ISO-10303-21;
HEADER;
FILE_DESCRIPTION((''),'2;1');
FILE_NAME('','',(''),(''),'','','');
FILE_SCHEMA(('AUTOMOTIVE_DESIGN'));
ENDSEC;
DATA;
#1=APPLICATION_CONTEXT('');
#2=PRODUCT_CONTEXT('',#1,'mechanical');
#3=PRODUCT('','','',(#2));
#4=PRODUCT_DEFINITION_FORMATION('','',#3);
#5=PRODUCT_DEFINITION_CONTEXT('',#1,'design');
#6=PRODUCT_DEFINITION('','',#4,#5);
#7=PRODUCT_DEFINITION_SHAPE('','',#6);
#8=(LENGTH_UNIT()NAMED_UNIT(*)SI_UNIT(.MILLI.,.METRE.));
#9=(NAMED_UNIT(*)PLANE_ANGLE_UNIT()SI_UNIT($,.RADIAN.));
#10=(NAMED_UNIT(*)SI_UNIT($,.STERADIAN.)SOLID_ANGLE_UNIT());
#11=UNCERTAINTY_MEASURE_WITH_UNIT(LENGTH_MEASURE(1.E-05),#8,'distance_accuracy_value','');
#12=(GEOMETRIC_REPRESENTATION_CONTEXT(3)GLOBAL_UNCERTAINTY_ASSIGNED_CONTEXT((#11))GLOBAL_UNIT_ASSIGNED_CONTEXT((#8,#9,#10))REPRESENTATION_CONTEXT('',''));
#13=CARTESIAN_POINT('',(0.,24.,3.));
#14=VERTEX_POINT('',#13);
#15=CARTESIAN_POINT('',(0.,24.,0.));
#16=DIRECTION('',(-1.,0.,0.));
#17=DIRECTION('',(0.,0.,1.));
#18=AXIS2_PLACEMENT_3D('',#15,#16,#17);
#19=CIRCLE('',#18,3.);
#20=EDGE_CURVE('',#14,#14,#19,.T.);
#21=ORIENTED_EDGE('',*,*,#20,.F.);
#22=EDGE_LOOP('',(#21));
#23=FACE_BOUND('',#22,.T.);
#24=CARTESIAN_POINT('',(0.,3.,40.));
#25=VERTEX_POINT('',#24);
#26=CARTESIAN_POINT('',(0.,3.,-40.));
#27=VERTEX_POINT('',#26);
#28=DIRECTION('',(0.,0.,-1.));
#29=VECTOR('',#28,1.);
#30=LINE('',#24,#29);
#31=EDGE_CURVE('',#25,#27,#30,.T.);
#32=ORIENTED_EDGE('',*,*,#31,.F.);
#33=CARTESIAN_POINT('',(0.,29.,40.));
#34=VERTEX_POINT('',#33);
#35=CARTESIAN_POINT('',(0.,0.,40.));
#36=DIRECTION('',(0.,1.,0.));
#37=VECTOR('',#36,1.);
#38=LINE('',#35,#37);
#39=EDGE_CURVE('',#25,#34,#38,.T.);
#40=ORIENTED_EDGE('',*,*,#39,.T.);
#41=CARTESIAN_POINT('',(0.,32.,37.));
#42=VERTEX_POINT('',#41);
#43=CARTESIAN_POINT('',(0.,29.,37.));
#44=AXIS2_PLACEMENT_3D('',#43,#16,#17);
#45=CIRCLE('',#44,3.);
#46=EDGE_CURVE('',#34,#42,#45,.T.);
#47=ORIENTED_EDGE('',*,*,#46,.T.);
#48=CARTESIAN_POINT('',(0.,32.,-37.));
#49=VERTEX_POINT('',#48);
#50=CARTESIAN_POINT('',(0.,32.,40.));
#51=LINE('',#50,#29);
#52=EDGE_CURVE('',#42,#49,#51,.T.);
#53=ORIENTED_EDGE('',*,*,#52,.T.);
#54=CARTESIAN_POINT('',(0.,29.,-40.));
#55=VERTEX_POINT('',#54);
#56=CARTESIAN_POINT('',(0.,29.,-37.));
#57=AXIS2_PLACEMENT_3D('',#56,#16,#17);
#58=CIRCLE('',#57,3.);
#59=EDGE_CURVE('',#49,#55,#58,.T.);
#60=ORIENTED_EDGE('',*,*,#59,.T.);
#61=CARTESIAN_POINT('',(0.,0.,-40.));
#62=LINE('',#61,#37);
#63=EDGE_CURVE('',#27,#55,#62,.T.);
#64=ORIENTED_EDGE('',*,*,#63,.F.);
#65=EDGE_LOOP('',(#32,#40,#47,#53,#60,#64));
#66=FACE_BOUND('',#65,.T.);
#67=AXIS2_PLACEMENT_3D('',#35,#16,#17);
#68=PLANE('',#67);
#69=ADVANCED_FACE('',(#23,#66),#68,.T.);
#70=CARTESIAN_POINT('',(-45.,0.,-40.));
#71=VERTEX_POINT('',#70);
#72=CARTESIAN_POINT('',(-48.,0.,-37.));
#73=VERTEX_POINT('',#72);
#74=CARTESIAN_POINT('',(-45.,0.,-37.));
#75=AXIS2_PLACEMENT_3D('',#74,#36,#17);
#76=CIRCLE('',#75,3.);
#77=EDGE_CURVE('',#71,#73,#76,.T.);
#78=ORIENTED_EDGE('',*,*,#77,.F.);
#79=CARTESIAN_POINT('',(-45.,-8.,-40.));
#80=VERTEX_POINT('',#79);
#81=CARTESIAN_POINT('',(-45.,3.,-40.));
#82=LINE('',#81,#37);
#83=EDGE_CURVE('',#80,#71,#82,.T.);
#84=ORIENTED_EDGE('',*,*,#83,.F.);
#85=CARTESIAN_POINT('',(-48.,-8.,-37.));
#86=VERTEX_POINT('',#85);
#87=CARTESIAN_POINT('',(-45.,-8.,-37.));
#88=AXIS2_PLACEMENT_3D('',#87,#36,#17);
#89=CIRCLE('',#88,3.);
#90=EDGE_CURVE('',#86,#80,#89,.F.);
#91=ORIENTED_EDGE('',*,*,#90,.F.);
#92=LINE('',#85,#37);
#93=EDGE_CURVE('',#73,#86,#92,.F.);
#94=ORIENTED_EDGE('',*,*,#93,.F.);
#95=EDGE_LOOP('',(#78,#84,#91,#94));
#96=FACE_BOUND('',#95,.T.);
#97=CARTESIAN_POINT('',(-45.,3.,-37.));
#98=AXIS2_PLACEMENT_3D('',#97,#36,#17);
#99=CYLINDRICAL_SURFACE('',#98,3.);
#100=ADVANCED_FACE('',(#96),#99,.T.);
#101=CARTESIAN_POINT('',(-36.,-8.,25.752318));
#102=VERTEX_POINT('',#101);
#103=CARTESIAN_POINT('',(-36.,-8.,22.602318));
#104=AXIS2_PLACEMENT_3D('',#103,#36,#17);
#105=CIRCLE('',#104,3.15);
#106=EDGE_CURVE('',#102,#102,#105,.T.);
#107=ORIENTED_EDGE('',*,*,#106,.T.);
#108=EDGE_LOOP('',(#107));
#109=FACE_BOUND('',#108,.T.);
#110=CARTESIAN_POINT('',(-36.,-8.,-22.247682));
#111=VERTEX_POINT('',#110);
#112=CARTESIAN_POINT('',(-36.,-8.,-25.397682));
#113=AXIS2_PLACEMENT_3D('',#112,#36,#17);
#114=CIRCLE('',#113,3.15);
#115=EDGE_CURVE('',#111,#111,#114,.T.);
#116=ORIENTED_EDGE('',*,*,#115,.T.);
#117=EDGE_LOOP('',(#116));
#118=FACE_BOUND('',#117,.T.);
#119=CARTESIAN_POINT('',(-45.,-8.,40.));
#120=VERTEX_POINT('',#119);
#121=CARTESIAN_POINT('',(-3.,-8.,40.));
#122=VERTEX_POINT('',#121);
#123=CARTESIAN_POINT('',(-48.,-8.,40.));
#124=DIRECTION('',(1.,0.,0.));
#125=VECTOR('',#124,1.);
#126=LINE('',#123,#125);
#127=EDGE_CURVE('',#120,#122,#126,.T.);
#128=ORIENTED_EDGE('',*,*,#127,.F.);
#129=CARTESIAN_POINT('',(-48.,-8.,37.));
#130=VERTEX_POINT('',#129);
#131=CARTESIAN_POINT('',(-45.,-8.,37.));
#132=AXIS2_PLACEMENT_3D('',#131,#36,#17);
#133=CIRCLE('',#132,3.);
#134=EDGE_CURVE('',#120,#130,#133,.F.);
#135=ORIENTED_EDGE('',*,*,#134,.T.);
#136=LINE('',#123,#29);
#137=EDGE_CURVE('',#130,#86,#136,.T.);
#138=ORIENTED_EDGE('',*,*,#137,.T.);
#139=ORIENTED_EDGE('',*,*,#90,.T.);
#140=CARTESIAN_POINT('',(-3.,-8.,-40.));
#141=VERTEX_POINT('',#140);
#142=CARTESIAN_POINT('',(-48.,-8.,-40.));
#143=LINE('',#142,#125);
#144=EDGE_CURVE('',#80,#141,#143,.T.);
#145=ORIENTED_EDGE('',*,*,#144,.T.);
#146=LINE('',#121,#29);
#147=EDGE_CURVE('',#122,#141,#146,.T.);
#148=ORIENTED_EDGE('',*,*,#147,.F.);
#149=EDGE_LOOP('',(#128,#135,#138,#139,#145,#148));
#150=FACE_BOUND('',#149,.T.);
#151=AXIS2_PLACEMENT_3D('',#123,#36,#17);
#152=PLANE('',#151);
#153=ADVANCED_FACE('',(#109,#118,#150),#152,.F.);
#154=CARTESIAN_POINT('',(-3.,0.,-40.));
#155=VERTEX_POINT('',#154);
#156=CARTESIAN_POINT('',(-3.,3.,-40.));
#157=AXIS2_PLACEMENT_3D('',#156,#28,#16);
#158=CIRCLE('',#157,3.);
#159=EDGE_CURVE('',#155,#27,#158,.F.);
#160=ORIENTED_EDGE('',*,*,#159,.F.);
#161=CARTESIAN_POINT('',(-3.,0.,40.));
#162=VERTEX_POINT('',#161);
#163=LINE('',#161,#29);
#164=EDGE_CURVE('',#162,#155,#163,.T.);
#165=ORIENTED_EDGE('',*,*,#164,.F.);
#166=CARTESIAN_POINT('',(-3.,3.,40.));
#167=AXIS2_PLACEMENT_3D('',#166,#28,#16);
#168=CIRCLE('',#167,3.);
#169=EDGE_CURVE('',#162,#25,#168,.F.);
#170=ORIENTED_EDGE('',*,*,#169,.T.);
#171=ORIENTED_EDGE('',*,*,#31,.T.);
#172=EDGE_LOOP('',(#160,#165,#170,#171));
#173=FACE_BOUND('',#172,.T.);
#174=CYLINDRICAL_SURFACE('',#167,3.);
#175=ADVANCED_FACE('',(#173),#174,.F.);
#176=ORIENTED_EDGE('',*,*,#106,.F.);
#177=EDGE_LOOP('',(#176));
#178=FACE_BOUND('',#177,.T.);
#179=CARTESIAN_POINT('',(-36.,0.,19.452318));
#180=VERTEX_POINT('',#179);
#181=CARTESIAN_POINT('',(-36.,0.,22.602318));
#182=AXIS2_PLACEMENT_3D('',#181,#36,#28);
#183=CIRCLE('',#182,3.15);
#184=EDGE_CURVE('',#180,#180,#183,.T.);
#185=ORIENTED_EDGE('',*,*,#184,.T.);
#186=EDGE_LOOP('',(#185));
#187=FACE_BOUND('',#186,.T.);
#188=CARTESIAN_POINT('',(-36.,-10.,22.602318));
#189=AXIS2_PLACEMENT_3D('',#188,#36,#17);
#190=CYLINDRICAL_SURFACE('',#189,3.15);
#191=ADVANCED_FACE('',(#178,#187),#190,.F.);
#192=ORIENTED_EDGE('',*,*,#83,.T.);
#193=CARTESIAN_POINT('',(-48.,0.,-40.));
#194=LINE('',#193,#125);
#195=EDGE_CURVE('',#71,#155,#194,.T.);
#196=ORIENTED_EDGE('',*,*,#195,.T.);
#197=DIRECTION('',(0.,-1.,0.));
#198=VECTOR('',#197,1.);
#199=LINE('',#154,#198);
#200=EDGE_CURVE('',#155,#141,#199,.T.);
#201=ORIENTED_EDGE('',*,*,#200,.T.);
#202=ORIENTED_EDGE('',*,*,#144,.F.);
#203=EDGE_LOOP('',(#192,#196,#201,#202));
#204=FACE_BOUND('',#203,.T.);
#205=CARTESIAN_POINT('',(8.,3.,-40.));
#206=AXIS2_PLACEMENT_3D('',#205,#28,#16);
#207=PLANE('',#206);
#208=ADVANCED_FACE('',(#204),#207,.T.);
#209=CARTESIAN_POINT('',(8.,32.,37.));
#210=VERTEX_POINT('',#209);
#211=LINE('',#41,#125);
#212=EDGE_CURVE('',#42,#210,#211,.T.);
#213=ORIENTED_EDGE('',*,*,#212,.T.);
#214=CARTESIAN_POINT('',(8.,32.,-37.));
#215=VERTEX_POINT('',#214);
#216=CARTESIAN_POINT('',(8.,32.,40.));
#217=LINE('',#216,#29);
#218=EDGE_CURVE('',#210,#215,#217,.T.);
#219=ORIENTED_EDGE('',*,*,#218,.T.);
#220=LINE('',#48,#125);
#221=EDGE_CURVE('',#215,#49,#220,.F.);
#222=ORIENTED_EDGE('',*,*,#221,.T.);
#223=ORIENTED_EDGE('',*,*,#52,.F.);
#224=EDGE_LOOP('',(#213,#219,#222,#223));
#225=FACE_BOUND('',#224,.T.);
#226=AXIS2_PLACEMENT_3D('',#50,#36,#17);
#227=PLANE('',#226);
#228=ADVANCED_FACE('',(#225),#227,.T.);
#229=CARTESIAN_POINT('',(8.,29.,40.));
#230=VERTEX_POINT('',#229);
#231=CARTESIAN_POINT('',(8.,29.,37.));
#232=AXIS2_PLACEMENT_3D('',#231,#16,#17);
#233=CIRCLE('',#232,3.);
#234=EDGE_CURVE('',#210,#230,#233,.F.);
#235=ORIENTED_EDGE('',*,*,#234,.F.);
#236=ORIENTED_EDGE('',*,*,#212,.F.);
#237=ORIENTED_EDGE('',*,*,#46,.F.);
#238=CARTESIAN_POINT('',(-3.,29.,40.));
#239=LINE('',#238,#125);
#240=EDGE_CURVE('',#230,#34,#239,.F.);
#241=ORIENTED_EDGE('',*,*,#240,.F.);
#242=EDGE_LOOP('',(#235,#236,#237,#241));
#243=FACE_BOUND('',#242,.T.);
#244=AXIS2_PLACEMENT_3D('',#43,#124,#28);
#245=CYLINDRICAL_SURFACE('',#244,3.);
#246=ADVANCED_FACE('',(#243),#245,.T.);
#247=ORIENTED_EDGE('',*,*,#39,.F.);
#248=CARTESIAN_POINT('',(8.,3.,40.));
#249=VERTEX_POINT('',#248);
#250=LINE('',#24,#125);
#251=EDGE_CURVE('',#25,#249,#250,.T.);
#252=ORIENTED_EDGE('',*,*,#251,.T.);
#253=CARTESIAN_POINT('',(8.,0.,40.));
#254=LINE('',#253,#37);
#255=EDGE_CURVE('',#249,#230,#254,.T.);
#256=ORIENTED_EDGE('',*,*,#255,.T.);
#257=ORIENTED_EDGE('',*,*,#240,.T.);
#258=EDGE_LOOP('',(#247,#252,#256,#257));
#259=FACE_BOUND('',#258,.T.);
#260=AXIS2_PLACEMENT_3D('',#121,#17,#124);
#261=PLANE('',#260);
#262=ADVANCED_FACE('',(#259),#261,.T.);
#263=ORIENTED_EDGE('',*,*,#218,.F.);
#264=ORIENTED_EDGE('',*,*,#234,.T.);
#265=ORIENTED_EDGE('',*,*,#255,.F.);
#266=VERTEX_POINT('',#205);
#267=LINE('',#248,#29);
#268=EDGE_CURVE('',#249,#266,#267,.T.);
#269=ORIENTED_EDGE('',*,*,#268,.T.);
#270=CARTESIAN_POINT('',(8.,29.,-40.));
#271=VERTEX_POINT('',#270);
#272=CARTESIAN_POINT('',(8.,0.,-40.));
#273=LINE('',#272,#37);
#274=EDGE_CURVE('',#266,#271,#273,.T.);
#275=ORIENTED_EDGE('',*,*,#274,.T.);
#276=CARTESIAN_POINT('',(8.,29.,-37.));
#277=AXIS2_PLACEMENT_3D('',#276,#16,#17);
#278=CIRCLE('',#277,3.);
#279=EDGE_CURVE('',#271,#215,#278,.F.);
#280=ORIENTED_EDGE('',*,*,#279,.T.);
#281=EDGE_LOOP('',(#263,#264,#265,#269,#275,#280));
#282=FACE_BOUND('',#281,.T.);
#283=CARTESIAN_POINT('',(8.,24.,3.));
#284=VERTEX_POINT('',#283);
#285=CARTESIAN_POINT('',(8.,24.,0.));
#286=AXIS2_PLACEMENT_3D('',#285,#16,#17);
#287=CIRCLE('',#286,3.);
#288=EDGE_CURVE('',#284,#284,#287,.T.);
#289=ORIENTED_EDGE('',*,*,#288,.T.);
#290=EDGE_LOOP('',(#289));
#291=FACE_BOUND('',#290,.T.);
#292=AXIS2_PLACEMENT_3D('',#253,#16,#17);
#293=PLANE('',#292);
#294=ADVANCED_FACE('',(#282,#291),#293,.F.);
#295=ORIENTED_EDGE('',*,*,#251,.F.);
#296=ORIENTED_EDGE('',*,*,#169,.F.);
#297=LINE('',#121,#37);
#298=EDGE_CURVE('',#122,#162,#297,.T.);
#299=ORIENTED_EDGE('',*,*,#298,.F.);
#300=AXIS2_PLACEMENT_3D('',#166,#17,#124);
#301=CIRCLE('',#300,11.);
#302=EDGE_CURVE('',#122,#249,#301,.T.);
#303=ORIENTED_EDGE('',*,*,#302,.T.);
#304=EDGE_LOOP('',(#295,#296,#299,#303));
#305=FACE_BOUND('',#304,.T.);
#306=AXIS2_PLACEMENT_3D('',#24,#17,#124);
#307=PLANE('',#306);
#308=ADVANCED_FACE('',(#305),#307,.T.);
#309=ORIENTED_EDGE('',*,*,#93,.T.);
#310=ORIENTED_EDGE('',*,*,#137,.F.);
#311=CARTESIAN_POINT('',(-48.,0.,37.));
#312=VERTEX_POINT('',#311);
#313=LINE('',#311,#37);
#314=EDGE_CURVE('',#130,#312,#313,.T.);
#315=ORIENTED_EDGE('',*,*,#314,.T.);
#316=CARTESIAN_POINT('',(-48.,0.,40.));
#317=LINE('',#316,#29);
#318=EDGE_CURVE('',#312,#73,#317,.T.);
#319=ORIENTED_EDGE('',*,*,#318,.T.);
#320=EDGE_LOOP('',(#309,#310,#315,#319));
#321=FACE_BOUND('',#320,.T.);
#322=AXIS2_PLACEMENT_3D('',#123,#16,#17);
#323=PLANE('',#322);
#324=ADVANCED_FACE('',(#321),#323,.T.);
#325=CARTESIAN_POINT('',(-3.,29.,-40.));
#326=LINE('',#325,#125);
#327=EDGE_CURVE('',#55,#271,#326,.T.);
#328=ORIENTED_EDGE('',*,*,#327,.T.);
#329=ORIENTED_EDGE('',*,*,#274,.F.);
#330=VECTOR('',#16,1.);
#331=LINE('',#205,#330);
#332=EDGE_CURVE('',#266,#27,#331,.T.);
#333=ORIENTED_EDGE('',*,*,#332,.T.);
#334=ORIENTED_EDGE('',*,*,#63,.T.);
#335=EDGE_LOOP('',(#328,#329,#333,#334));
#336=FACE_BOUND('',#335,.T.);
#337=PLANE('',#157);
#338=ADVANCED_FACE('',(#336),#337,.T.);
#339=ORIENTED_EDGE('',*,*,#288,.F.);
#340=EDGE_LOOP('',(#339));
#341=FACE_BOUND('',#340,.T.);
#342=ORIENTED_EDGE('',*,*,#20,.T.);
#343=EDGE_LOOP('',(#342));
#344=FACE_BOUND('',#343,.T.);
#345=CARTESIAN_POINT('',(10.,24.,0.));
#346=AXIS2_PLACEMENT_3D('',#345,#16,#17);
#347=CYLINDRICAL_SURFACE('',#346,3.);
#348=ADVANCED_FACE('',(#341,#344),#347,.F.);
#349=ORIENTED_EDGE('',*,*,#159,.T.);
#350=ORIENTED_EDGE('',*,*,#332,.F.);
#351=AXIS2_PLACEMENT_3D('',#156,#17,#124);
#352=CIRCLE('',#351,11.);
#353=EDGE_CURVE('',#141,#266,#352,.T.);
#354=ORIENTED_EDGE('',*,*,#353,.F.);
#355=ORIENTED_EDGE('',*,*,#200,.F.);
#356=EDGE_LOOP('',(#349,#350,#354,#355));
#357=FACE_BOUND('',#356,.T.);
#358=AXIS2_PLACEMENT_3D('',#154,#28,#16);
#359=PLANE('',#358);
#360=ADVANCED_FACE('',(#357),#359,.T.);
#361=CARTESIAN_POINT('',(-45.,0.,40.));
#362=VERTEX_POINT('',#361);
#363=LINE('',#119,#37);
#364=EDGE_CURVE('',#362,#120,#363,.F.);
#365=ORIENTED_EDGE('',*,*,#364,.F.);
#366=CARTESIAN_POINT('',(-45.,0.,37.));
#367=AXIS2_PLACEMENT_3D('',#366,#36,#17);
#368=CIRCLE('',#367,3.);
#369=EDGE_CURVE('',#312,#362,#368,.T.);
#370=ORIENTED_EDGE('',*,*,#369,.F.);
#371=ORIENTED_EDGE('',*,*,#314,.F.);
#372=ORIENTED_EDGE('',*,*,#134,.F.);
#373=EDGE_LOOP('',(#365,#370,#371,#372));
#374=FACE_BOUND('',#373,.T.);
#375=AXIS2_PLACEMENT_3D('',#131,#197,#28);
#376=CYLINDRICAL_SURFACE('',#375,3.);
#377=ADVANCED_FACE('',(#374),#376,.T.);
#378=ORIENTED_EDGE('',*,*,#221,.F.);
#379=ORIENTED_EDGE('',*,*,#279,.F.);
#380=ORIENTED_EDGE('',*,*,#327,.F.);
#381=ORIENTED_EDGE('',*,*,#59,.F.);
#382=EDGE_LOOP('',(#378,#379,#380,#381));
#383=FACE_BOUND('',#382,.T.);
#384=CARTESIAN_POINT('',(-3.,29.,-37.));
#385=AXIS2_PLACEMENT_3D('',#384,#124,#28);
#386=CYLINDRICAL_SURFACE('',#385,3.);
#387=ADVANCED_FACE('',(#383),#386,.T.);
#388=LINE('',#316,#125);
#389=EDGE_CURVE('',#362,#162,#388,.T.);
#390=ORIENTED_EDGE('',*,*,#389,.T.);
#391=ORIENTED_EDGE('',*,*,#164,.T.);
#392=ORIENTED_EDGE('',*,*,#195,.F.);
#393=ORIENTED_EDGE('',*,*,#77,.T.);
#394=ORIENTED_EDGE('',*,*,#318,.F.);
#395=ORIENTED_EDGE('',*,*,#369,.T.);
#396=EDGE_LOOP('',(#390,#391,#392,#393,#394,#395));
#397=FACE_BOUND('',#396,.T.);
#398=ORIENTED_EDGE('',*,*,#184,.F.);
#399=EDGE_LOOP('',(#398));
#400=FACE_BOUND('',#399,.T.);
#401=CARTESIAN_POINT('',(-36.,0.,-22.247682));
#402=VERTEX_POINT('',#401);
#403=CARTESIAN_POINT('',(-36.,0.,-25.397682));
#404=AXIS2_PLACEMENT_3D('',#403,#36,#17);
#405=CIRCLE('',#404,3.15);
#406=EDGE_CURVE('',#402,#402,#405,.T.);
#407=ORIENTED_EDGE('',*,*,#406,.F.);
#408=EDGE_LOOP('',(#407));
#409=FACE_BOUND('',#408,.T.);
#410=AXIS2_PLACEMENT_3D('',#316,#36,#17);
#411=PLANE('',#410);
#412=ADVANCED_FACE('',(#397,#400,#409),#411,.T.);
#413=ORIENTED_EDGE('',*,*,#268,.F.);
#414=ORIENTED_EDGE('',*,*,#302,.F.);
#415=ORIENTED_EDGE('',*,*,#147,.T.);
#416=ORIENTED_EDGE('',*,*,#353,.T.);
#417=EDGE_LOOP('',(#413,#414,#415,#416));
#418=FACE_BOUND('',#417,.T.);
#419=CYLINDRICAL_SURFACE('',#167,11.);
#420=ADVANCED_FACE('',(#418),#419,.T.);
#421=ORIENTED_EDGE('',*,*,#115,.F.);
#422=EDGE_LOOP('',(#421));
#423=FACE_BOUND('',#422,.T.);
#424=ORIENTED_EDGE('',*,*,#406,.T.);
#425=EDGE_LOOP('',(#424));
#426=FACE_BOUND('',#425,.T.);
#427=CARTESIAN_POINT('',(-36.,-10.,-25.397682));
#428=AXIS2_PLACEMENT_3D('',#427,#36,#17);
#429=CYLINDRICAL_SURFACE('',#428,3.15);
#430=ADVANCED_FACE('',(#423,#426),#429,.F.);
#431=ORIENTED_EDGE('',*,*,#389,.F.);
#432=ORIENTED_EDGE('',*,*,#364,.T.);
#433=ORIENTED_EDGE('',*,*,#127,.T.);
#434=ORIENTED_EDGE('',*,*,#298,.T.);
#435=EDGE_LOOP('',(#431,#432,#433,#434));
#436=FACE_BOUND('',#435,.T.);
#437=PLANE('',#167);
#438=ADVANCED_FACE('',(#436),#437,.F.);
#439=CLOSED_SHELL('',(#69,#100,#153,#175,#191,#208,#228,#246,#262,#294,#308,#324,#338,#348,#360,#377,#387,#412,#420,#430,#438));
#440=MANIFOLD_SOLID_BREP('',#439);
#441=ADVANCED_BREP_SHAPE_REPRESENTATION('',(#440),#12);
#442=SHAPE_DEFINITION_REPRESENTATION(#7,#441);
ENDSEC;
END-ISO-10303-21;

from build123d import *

# Parameters (mm, degrees)
BASE_FLANGE1_DEPTH = 40
FILLET1_R          = 3
SKETCH6_R          = 3.15
CUT_EXTRUDE1_DEPTH = 10
SKETCH7_R          = 3
CUT_EXTRUDE2_DEPTH = 10


# Sheet-metal steps are written as plain solids
with BuildPart() as part:
    # Sketch1 → Base-Flange1 (new, symmetric)
    with BuildSketch(Plane.XY):
        with BuildLine():
            Line((-48, 0), (-3, 0))
            ThreePointArc((-3, 0), (-0.878679656, 0.878679656), (0, 3))
            Line((0, 3), (0, 32))
            Line((0, 32), (8, 32))
            Line((8, 32), (8, 3))
            ThreePointArc((8, 3), (4.778174593, -4.778174593), (-3, -8))
            Line((-3, -8), (-48, -8))
            Line((-48, -8), (-48, 0))
        make_face()
    extrude(amount=BASE_FLANGE1_DEPTH, both=True)

    # Fillet1
    fillet1_edges = [part.edges().sort_by_distance(p)[0] for p in [
        (-48, -4, 40),
        (-48, -4, -40),
        (4, 32, 40),
        (4, 32, -40),
    ]]
    fillet(fillet1_edges, radius=FILLET1_R)

    # Sketch6 → Cut-Extrude1 (cut)
    with BuildSketch(Plane(origin=(0, 0, 0), x_dir=(1, 0, 0), z_dir=(0, 1, 0))):
        with Locations(Location((-36, 25.397681591, 0), (0, 0, 270))):
            Circle(SKETCH6_R)
        with Locations(Location((-36, -22.602318409, 0), (0, 0, 270))):
            Circle(SKETCH6_R)
    extrude(amount=-CUT_EXTRUDE1_DEPTH, mode=Mode.SUBTRACT)

    # Sketch7 → Cut-Extrude2 (cut)
    with BuildSketch(Plane.ZY):
        with Locations((0, 24)):
            Circle(SKETCH7_R)
    extrude(amount=-CUT_EXTRUDE2_DEPTH, mode=Mode.SUBTRACT)


solid = part.part
